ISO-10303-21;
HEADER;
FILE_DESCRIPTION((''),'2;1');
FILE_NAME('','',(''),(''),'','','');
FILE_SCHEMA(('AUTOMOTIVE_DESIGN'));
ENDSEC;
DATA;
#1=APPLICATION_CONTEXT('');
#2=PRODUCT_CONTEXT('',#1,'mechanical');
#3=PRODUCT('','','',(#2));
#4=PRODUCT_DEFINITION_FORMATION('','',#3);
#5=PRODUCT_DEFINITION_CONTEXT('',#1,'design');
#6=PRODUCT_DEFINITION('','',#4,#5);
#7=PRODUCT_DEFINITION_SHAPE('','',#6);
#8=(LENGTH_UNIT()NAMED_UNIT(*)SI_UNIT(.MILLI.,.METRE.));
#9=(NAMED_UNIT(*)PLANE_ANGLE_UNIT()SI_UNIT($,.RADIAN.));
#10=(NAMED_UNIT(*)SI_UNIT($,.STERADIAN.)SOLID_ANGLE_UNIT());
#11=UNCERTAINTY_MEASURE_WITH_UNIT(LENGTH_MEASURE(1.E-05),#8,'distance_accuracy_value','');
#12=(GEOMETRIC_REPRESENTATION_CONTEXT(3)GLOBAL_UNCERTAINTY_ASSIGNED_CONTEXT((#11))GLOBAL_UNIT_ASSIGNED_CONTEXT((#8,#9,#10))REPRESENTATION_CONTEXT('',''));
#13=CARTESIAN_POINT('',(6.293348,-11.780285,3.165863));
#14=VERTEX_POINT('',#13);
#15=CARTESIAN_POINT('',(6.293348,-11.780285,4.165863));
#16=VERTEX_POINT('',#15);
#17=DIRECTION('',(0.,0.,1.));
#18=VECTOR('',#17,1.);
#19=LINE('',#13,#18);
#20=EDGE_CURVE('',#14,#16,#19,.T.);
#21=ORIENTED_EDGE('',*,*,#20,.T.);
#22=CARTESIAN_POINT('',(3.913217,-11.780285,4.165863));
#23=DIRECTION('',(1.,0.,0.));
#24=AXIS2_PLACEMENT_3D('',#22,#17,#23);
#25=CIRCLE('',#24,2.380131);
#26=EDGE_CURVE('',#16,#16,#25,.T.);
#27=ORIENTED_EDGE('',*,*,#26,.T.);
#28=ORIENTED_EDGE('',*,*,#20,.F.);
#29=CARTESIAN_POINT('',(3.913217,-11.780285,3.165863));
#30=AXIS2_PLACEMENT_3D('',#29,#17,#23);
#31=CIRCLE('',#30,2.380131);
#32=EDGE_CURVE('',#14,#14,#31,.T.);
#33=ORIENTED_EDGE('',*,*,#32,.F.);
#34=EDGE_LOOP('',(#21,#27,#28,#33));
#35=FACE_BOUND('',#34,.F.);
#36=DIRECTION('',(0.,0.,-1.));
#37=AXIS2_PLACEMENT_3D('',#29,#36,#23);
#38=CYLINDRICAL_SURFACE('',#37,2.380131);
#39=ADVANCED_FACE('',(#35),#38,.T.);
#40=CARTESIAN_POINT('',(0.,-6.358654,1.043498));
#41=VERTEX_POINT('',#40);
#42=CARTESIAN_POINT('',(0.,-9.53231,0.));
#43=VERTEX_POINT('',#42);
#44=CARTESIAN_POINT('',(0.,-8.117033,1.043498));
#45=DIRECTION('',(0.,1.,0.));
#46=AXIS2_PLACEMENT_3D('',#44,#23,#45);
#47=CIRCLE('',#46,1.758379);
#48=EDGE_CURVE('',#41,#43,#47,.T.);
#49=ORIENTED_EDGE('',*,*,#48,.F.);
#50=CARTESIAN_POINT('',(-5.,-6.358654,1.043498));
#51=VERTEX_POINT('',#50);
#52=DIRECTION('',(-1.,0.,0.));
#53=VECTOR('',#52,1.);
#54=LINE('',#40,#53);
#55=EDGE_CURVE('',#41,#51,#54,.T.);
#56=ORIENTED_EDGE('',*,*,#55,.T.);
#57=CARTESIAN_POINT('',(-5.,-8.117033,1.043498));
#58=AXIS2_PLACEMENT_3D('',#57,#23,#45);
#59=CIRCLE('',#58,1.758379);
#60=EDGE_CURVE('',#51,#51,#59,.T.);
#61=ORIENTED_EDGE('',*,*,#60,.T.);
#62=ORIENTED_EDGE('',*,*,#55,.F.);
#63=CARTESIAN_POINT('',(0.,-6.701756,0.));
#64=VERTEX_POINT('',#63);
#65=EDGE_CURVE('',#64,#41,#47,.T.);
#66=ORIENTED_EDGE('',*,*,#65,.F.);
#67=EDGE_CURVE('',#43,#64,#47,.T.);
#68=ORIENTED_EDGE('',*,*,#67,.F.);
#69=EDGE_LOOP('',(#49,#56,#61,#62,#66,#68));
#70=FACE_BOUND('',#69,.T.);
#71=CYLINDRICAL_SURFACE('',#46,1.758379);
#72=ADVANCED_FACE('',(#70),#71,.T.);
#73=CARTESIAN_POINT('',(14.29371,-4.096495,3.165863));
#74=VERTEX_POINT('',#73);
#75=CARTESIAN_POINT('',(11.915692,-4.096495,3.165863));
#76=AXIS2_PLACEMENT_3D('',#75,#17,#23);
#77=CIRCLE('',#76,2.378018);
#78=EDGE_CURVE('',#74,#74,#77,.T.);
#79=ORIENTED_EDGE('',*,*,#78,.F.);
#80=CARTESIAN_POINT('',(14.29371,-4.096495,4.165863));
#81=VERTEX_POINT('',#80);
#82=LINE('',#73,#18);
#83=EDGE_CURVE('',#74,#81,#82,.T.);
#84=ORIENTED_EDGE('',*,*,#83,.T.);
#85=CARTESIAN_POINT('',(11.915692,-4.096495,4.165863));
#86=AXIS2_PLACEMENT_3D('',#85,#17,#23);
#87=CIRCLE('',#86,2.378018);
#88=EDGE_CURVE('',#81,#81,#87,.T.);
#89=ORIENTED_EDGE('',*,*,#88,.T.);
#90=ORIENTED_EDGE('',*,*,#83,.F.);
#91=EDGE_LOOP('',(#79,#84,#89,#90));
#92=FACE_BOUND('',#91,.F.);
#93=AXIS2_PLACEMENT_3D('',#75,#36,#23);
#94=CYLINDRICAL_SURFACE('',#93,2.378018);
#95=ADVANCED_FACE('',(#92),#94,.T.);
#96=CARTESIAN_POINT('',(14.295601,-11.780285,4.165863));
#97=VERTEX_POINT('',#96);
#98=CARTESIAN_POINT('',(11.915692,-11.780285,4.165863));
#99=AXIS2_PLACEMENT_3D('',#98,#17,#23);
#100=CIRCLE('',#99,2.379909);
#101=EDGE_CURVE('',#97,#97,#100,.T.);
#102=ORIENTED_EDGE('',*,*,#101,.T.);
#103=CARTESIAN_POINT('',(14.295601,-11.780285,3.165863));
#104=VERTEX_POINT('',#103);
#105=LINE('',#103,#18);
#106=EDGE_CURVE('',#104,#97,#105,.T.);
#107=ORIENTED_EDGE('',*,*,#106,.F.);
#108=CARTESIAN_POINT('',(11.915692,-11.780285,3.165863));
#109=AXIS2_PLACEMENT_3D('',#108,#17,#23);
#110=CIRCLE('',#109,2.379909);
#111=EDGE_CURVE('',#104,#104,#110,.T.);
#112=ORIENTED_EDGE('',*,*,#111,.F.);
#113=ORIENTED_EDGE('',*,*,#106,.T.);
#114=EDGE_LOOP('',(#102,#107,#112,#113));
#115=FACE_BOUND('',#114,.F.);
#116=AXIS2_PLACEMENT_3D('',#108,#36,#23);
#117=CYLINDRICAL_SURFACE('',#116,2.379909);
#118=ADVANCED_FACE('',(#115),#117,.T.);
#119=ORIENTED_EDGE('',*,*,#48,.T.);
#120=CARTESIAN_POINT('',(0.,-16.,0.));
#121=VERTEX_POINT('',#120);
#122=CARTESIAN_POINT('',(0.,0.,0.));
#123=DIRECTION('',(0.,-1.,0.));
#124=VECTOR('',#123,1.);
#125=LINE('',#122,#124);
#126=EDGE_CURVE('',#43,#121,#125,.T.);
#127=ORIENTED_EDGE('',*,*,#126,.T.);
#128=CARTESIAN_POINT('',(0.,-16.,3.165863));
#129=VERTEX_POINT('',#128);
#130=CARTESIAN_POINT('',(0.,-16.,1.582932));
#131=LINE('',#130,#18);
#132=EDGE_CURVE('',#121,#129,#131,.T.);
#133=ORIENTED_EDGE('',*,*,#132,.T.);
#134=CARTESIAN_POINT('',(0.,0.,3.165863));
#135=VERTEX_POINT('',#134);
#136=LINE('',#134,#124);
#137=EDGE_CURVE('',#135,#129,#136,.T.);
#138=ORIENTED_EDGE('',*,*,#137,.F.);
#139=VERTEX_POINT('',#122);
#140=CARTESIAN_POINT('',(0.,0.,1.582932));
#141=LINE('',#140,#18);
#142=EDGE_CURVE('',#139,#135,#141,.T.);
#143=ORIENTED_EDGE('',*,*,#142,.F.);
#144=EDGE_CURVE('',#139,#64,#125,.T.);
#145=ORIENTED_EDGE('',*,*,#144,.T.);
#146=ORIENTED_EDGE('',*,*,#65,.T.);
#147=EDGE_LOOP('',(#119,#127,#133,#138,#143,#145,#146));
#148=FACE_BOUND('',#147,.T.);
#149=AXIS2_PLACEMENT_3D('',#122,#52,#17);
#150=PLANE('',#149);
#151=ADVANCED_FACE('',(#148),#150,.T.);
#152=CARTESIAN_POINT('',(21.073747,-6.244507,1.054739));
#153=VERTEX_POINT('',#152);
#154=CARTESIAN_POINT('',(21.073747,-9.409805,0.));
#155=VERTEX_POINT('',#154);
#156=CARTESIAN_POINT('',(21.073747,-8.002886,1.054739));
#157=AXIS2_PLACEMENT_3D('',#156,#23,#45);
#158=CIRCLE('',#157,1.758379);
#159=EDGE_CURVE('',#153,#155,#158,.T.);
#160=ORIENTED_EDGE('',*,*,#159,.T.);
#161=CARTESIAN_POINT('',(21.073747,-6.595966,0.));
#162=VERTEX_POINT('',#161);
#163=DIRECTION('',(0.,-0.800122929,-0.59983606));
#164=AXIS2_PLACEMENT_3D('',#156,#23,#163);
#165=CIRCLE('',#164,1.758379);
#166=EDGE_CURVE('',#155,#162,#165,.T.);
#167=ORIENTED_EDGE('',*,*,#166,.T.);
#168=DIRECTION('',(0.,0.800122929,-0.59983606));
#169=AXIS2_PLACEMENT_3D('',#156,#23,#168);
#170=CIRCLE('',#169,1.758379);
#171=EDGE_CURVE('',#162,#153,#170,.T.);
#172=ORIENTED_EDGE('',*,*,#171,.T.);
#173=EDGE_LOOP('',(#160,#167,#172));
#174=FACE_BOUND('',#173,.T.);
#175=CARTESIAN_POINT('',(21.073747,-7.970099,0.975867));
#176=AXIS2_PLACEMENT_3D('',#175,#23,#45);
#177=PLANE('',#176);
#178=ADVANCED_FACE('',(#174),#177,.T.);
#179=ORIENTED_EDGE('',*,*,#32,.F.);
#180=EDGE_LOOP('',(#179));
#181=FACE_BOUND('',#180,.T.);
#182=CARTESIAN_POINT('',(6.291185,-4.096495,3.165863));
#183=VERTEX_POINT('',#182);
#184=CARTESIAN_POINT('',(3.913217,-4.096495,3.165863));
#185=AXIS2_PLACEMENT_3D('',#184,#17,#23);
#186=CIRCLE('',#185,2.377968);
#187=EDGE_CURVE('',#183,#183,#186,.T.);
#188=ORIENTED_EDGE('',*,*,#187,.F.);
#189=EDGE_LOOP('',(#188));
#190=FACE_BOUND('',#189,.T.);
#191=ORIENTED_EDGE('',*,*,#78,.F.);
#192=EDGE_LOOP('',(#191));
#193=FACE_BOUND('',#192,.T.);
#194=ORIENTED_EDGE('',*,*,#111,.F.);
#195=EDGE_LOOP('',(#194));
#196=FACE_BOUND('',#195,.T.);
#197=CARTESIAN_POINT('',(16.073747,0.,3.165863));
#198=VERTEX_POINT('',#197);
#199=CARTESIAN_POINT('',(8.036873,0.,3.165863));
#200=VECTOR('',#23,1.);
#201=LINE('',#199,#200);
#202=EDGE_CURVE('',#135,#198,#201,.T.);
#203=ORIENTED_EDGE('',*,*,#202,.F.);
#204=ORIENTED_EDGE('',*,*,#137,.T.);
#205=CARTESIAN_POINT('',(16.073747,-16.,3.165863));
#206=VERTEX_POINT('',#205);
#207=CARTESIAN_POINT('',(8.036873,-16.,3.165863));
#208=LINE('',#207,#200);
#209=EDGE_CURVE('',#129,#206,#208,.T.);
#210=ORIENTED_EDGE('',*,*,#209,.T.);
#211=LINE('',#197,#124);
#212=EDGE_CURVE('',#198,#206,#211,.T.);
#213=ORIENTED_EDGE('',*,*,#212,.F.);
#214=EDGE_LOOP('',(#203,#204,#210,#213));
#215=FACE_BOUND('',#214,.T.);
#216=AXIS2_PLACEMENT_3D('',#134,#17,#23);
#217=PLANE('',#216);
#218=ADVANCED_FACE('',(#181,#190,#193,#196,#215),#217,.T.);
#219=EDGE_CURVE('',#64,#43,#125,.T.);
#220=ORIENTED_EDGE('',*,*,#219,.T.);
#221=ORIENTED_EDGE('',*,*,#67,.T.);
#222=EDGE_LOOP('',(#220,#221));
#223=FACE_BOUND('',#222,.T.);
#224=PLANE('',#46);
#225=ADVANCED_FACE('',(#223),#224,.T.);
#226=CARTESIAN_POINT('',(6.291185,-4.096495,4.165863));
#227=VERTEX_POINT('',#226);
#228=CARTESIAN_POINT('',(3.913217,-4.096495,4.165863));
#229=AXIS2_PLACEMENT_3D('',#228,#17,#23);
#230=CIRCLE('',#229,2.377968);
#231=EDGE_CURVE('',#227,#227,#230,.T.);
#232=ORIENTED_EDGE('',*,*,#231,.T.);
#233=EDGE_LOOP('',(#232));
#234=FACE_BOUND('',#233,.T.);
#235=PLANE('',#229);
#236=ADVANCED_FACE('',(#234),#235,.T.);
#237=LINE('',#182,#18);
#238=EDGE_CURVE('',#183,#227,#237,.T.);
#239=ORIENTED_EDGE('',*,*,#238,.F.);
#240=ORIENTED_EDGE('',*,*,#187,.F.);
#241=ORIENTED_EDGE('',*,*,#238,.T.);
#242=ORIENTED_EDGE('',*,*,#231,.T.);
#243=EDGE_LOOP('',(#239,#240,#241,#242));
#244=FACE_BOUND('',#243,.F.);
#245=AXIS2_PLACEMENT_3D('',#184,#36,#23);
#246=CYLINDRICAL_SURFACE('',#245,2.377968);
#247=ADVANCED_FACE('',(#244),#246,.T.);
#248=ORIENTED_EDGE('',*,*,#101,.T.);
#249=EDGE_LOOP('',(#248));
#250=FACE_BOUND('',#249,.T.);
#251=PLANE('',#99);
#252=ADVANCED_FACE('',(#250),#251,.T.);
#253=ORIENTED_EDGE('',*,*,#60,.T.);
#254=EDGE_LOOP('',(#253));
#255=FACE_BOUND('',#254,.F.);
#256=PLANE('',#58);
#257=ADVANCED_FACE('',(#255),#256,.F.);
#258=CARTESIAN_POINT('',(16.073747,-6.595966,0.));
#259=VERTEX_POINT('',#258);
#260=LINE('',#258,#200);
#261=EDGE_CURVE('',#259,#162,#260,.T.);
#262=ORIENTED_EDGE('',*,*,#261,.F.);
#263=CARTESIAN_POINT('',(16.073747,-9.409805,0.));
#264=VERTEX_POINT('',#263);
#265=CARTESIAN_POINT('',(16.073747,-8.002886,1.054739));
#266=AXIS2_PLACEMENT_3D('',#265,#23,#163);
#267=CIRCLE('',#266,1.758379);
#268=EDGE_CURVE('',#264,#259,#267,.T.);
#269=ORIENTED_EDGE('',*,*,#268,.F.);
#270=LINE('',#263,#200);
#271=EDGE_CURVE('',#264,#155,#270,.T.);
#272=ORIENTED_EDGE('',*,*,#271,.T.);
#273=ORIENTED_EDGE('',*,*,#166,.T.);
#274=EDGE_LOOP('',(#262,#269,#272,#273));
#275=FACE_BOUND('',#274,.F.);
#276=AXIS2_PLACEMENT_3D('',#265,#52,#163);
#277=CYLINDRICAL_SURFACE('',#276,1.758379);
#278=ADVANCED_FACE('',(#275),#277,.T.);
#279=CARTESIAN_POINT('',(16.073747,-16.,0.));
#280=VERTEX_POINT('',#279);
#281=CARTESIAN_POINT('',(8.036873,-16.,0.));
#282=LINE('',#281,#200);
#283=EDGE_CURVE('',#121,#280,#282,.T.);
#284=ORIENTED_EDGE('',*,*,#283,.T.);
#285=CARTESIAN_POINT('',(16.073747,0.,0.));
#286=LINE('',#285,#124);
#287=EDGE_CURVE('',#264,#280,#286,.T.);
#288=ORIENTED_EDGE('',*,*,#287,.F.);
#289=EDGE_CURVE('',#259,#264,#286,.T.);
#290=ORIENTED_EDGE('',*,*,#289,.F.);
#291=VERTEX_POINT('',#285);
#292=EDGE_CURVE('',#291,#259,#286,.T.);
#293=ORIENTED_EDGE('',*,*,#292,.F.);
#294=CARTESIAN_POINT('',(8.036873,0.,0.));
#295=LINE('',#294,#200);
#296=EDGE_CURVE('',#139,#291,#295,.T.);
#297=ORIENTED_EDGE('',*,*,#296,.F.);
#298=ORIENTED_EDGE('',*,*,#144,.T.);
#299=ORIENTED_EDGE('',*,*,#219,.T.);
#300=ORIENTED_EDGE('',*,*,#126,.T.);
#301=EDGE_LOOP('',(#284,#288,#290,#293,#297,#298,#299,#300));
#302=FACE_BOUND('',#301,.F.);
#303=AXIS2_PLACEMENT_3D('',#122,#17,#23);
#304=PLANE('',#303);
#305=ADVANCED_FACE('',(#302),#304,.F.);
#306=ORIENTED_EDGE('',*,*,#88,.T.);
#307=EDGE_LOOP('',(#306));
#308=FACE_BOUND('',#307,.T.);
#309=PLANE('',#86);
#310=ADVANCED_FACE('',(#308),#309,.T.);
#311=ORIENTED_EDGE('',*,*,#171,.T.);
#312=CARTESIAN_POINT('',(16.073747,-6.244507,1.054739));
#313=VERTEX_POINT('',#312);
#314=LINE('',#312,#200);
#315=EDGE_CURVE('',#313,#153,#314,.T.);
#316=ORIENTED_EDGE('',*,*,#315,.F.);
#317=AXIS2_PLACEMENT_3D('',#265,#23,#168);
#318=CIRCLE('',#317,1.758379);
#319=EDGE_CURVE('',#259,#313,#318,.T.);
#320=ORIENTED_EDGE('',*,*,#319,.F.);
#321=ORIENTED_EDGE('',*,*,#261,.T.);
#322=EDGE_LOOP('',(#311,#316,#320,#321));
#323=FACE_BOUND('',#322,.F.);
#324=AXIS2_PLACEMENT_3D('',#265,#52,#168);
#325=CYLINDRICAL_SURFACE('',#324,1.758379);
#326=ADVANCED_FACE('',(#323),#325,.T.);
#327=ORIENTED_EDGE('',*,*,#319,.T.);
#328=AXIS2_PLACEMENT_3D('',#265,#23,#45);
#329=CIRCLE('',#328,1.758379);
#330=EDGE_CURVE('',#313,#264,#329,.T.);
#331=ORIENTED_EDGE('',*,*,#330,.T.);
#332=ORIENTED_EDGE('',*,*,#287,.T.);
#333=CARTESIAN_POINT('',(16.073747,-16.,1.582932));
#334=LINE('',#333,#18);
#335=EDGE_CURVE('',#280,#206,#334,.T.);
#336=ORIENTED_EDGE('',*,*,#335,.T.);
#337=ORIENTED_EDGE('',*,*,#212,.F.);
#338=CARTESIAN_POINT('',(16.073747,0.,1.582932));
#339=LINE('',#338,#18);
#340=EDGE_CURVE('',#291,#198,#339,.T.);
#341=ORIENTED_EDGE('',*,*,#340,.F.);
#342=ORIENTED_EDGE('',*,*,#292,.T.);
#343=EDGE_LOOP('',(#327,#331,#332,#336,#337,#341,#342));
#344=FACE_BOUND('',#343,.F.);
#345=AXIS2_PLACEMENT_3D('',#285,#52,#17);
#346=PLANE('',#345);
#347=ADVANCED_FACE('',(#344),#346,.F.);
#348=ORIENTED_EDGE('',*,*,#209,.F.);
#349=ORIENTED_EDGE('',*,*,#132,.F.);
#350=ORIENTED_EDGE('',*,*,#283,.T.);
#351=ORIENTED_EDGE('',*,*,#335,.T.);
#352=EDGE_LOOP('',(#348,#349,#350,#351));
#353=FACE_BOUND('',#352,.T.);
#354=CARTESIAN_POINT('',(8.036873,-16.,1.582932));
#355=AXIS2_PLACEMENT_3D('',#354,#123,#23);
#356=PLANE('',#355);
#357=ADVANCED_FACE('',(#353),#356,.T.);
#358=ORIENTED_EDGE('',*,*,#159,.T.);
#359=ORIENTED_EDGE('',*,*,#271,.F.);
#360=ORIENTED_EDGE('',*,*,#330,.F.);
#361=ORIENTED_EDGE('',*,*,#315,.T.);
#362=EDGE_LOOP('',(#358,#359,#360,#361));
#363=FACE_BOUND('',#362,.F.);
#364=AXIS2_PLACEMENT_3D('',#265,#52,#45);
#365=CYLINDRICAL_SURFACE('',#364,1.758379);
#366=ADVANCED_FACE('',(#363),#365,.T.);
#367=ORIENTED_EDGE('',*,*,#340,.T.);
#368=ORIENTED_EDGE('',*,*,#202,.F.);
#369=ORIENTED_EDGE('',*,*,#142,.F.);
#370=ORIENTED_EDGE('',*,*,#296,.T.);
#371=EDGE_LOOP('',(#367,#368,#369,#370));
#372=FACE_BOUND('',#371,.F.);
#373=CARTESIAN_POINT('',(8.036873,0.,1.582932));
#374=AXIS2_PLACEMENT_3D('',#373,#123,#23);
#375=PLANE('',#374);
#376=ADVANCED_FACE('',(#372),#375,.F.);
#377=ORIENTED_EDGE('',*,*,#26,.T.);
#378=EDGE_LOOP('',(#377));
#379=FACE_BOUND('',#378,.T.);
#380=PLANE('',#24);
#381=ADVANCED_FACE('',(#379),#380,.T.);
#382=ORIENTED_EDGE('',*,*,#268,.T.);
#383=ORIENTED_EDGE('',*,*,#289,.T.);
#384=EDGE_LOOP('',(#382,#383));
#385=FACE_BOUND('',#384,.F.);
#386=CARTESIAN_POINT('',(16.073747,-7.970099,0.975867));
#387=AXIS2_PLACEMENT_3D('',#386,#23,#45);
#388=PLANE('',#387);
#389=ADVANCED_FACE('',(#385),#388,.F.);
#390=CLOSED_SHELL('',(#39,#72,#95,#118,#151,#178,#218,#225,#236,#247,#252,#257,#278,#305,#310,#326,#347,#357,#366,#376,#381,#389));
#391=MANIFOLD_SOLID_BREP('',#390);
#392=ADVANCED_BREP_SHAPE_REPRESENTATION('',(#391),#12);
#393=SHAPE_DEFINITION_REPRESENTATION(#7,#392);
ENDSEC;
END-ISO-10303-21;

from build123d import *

# Parameters (mm, degrees)
F0_W     = 16.0737466067
F0_H     = 3.1658632215
F1_DEPTH = 16
F2_R     = 2.3801305446
F2_R_2   = 2.3799092656
F2_R_3   = 2.3780181716
F2_R_4   = 2.3779678295
F3_DEPTH = 1
F5_DEPTH = 5
F6_R     = 1.7583787775
F7_DEPTH = 5


with BuildPart() as f1:
    # F0 (on Front) → F1 (new body)
    with BuildSketch(Plane.XZ):
        with Locations((8.0368733034, 1.5829316108)):
            Rectangle(F0_W, F0_H)
    extrude(amount=F1_DEPTH)

    # F2 (on face) → F3 (join)
    with BuildSketch(Plane.XY.offset(3.1658632215)):
        with Locations((3.9132172242, -11.7802852765)):
            Circle(F2_R)
        with Locations((11.9156921282, -11.7802852765)):
            Circle(F2_R_2)
        with Locations((11.9156921282, -4.0964945219)):
            Circle(F2_R_3)
        with Locations((3.9132172242, -4.0964945219)):
            Circle(F2_R_4)
    extrude(amount=F3_DEPTH)

    # F4 (on face) → F5 (join)
    with BuildSketch(Plane.YZ.offset(16.0737466067)):
        with BuildLine():
            ThreePointArc((-6.5959664397, 0), (-6.3346840784, 0.4988617172), (-6.2445068398, 1.0547389975))
            ThreePointArc((-6.2445068398, 1.0547389975), (-8.5587628976, 2.7229405364), (-9.409804795, 0))
            ThreePointArc((-9.409804795, 0), (-8.0028856173, -0.70363978), (-6.5959664397, 0))
        make_face()
    extrude(amount=F5_DEPTH)

    # F6 (on Right) → F7 (join)
    with BuildSketch(Plane.YZ):
        with Locations((-8.1170331687, 1.0434978176)):
            Circle(F6_R)
    extrude(amount=-F7_DEPTH)


solid = f1.part
